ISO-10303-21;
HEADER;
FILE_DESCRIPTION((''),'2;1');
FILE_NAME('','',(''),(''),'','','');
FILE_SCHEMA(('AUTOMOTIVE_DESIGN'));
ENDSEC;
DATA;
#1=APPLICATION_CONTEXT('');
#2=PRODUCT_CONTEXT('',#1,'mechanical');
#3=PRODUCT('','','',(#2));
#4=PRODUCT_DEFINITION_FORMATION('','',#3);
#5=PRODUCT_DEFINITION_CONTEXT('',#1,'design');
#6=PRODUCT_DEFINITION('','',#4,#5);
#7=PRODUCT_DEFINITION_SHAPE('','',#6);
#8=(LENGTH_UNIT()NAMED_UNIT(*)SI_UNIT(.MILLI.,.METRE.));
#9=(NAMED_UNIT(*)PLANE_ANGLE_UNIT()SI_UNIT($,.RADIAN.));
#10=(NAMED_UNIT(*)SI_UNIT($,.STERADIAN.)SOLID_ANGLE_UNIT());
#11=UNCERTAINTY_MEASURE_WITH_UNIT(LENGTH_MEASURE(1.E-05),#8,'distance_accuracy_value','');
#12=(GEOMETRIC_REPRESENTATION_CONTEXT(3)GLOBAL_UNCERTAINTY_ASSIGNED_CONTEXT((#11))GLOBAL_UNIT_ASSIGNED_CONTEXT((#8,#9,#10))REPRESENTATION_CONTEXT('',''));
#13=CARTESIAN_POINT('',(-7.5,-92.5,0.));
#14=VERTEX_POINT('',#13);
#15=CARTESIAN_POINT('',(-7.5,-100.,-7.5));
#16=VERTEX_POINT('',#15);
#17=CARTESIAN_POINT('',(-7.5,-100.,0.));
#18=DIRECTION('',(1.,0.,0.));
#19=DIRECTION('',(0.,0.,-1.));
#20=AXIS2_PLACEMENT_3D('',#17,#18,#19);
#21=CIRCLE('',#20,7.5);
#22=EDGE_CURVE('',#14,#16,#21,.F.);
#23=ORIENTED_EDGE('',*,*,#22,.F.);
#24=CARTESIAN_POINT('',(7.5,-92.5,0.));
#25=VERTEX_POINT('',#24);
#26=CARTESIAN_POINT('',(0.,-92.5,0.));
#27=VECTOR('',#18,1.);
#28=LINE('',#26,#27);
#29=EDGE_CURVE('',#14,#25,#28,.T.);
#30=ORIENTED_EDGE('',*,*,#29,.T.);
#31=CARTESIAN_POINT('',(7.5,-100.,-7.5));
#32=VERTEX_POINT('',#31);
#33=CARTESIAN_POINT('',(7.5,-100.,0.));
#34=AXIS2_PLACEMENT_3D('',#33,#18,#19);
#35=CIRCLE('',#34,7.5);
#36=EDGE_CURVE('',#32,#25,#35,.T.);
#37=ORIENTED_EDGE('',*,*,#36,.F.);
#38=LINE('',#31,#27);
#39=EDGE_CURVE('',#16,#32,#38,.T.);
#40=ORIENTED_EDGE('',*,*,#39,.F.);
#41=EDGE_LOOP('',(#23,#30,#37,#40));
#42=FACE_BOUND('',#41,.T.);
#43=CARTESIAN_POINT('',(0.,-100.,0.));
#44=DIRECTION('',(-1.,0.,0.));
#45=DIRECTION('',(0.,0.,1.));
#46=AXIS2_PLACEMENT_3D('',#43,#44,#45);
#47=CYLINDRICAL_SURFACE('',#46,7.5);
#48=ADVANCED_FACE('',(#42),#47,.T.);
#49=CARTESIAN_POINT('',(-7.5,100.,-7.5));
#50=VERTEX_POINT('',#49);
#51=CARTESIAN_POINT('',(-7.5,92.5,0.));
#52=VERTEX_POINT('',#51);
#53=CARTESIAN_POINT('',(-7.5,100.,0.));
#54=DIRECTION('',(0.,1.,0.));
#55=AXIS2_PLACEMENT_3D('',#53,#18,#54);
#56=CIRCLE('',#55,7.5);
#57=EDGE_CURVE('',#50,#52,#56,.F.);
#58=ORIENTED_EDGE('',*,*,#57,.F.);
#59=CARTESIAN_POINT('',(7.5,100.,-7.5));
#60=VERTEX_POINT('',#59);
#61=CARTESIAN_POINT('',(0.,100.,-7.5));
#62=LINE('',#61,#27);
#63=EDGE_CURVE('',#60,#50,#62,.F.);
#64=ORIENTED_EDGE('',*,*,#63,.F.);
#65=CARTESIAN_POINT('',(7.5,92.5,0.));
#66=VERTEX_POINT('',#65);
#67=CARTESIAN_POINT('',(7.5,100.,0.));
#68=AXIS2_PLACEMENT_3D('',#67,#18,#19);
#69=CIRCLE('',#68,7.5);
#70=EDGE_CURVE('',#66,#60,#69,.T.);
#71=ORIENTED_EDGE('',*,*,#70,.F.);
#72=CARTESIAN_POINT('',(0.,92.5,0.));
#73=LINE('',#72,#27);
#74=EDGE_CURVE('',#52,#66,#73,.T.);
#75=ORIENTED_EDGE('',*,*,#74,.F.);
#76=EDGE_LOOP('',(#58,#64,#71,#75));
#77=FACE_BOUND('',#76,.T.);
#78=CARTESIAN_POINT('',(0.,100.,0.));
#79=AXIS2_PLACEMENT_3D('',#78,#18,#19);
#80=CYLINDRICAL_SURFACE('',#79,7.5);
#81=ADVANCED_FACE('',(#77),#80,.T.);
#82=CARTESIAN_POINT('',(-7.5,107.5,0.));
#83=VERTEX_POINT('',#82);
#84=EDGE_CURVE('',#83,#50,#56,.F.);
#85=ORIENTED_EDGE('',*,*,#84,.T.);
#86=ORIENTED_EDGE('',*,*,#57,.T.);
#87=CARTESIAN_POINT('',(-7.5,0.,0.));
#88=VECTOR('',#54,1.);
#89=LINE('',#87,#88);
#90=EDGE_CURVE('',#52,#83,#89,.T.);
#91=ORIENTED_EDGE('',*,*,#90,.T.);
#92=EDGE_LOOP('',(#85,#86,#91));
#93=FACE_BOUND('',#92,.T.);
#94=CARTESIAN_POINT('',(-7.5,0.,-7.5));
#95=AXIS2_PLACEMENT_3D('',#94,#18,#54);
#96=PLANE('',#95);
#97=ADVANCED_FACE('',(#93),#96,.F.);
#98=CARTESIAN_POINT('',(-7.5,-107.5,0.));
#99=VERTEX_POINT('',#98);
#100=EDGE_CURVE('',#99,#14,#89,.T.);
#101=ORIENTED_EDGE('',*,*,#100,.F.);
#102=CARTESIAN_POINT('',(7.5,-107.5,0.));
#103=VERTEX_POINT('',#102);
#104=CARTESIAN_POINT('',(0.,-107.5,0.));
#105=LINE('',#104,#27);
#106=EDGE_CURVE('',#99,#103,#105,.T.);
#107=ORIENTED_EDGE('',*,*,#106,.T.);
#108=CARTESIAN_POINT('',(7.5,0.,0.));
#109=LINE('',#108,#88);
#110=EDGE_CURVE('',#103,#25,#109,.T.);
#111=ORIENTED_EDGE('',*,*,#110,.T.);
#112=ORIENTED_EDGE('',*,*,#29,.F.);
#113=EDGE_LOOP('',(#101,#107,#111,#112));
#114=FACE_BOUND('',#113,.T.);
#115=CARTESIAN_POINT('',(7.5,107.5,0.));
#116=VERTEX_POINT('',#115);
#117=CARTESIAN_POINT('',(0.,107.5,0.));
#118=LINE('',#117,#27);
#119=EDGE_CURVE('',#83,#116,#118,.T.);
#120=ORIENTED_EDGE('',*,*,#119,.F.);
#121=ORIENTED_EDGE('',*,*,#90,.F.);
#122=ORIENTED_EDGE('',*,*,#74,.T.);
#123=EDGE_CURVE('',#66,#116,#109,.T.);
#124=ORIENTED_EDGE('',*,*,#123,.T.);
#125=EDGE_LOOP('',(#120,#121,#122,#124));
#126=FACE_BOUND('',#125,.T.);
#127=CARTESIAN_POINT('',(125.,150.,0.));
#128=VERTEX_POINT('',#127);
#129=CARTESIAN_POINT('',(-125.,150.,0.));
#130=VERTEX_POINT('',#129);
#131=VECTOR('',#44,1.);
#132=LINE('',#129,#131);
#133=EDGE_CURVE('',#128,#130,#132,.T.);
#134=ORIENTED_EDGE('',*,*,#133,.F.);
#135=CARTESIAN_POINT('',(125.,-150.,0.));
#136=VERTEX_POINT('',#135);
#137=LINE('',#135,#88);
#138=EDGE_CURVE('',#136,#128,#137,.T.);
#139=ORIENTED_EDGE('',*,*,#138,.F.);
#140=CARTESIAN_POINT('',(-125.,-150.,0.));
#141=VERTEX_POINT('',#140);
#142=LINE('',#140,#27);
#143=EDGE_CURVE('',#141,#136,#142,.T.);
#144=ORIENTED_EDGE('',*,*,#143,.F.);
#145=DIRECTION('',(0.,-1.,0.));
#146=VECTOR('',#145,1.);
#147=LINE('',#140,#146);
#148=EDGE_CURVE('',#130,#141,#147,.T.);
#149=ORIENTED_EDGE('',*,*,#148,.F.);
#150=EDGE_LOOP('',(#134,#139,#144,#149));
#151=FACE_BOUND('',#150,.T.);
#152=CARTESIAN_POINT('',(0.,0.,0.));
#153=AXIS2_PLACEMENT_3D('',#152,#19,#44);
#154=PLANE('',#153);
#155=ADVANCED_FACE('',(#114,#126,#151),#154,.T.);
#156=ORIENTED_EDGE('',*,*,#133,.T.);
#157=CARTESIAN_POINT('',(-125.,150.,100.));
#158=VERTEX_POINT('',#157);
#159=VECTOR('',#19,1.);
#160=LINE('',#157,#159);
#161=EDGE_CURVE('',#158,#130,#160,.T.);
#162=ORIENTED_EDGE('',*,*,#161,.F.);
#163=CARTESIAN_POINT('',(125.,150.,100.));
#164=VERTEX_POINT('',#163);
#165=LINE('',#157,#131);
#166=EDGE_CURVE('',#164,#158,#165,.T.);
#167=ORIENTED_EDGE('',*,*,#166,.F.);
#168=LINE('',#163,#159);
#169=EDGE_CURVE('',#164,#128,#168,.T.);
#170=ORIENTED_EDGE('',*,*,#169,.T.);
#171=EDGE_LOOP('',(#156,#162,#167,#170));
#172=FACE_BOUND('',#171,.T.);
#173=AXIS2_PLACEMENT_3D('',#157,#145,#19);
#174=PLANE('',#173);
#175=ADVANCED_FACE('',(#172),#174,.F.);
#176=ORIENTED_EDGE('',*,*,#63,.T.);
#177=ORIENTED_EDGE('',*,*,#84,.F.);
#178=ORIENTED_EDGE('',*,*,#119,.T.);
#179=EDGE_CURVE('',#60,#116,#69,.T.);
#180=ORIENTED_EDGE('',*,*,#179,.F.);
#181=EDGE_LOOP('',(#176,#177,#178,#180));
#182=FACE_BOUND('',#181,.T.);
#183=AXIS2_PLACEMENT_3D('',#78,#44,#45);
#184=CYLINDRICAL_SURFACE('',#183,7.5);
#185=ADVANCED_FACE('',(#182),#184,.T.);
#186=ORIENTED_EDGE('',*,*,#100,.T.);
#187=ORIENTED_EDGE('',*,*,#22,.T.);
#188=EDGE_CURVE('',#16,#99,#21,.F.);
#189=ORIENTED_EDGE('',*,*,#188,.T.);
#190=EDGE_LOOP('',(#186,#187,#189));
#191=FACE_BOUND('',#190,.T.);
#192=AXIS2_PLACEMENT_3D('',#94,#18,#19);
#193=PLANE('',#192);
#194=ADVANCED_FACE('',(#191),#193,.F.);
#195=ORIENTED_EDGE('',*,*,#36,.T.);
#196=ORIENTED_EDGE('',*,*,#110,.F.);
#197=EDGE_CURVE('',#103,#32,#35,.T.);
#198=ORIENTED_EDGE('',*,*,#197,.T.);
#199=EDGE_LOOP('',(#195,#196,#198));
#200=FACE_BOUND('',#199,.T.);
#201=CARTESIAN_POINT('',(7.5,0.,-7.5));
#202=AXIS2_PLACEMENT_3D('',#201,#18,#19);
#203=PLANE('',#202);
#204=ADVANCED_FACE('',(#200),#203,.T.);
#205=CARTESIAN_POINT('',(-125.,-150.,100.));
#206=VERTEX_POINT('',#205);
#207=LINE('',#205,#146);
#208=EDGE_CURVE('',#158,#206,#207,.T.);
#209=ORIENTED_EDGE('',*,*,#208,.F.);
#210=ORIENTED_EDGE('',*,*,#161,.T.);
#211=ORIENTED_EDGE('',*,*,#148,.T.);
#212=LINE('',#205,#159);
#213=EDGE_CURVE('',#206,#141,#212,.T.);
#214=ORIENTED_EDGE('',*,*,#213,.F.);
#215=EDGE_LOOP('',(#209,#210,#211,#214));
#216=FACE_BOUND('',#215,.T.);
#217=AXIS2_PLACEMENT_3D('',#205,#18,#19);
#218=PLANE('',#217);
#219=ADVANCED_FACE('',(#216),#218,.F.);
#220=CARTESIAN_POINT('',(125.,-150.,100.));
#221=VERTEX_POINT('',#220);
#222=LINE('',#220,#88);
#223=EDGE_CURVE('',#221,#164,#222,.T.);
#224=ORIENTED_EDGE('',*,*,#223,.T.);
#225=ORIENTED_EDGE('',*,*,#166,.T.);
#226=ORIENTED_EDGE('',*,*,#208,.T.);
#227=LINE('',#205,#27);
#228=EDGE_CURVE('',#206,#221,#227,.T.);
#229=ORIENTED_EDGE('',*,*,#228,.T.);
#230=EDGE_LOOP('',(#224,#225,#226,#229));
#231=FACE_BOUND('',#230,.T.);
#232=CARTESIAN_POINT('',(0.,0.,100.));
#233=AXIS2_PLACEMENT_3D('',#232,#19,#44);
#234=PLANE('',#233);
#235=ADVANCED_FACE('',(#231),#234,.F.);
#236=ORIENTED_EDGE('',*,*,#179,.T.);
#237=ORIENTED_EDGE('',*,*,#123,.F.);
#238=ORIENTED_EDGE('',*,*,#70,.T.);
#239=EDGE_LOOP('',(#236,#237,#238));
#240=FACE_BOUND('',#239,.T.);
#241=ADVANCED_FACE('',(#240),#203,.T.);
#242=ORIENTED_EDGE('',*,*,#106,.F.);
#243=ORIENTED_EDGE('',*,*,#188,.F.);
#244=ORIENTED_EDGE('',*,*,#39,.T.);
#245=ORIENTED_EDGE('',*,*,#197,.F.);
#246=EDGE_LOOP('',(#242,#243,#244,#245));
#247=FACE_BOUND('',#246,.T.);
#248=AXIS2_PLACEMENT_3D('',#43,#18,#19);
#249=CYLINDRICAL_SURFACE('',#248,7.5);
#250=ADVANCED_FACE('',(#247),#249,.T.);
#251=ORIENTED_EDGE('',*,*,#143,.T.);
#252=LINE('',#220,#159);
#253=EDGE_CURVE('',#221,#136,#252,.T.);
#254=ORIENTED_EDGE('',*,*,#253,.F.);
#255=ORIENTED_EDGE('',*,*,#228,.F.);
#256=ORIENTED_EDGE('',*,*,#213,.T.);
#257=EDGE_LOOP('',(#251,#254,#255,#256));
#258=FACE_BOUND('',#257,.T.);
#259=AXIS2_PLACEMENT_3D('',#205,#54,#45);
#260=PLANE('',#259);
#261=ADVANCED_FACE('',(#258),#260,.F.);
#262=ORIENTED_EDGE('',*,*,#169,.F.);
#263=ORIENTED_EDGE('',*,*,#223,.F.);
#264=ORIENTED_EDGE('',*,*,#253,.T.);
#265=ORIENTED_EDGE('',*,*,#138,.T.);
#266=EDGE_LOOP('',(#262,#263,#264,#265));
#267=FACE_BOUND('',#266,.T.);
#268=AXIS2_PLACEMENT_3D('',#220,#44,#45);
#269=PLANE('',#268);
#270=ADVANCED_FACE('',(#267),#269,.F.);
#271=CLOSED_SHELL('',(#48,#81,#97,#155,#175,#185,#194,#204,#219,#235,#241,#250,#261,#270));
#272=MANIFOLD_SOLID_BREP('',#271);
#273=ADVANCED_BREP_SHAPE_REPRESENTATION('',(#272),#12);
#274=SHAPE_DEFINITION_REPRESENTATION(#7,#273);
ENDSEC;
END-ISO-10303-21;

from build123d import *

# Parameters (mm, degrees)
SKETCH1_W           = 250
SKETCH1_H           = 300
BOSS_EXTRUDE1_DEPTH = 100
SKETCH2_W           = 15
SKETCH2_H           = 15
BOSS_EXTRUDE2_DEPTH = 7.5
FILLET1_R           = 7.5


with BuildPart() as part:
    # Sketch1 → Boss-Extrude1 (new body)
    with BuildSketch(Plane.XY):
        Rectangle(SKETCH1_W, SKETCH1_H)
    extrude(amount=BOSS_EXTRUDE1_DEPTH)

    # Sketch2 → Boss-Extrude2 (add)
    with BuildSketch(Plane(origin=(0, 0, 0), x_dir=(-1, 0, 0), z_dir=(0, 0, -1))):
        with Locations((0, 100)):
            Rectangle(SKETCH2_W, SKETCH2_H)
        with Locations((0, -100)):
            Rectangle(SKETCH2_W, SKETCH2_H)
    extrude(amount=BOSS_EXTRUDE2_DEPTH)

    # Fillet1
    fillet1_edges = [part.edges().sort_by_distance(p)[0] for p in [
        (0, 107.5, -7.5),
        (0, 92.5, -7.5),
        (0, -107.5, -7.5),
        (0, -92.5, -7.5),
    ]]
    fillet(fillet1_edges, radius=FILLET1_R - 0.0001)  # a hair under: the kernel refuses the full size


solid = part.part
